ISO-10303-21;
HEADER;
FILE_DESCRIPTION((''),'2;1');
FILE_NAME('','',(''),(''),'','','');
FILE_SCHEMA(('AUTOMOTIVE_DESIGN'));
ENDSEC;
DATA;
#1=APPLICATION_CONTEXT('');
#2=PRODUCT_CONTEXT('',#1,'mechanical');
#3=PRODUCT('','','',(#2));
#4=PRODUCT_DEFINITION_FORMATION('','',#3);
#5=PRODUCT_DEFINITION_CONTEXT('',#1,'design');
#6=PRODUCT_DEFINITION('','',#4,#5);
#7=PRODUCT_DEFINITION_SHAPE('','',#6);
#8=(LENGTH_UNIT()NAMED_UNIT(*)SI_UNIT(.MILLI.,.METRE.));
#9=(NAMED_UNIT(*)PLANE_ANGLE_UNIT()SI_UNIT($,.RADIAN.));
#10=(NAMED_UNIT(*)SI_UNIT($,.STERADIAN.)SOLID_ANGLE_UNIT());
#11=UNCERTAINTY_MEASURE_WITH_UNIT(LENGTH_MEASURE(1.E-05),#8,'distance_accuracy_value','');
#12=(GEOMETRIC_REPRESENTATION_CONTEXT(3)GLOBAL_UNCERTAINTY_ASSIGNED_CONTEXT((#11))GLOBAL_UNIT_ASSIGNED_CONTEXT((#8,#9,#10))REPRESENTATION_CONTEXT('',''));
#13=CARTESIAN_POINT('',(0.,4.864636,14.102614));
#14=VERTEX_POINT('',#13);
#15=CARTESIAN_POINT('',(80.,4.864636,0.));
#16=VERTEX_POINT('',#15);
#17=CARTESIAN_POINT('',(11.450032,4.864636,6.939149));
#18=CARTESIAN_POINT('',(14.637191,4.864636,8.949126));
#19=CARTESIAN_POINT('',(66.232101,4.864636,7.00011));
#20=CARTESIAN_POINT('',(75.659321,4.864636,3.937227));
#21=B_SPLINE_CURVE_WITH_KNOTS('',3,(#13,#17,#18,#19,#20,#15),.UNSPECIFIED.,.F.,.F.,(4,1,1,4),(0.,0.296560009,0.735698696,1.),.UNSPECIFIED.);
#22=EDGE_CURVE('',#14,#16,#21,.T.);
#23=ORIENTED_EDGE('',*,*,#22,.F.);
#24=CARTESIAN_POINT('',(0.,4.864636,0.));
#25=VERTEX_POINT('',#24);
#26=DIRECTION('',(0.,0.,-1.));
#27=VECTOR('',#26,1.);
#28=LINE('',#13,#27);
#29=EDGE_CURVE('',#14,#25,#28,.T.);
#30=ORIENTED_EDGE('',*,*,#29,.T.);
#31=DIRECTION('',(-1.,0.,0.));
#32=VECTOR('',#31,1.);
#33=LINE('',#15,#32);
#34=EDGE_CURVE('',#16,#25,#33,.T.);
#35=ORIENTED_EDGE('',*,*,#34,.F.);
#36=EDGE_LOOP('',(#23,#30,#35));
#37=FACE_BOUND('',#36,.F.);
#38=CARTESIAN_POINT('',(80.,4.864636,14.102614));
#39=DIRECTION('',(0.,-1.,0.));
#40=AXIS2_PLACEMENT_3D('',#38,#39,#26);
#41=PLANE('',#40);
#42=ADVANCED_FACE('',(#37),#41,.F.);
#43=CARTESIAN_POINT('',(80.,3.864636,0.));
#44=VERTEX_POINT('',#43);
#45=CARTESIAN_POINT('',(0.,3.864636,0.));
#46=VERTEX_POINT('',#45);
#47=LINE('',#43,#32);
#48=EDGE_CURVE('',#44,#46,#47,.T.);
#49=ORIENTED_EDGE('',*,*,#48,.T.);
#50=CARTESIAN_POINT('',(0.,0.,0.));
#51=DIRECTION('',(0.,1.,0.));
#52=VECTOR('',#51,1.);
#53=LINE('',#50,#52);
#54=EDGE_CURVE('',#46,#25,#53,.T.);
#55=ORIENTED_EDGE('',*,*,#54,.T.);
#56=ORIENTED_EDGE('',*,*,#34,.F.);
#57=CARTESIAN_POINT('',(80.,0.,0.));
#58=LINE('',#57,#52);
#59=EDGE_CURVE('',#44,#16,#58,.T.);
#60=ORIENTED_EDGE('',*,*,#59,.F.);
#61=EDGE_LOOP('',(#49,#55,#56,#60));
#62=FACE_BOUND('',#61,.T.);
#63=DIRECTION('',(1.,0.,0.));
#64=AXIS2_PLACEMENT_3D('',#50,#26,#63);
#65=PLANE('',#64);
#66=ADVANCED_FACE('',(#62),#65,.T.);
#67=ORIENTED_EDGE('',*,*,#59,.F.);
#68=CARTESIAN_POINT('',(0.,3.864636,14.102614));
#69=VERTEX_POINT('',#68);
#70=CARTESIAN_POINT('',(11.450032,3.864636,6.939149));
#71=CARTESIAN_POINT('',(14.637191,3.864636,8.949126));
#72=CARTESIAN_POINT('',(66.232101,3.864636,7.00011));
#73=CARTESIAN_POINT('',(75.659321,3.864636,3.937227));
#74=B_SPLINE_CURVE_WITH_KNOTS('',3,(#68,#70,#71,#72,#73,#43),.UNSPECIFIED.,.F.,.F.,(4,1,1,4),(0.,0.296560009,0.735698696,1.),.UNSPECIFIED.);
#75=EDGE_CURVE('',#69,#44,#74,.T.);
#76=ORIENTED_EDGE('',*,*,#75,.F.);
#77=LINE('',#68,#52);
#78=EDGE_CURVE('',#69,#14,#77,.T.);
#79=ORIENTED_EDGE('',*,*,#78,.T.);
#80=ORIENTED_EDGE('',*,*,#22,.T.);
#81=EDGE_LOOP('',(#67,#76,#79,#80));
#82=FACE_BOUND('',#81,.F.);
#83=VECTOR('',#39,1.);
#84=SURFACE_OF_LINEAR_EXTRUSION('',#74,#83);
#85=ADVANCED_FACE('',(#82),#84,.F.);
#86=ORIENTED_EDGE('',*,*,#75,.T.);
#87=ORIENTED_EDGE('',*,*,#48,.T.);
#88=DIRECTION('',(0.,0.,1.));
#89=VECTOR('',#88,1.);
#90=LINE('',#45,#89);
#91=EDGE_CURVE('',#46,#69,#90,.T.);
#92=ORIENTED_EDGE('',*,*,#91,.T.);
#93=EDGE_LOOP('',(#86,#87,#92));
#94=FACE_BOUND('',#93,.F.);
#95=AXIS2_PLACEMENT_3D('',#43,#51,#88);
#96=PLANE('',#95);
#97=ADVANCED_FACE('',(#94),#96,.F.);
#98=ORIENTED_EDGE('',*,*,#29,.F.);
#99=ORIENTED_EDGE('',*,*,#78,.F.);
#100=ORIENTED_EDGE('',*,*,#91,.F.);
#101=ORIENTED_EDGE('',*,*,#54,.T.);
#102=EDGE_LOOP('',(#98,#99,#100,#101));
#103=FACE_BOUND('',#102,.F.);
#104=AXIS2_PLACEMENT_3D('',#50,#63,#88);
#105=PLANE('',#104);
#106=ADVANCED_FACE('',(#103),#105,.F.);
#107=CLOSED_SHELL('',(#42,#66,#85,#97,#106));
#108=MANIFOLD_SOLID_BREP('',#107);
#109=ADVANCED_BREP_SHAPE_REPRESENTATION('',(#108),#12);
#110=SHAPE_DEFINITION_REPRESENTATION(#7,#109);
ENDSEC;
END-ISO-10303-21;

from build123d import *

# Parameters (mm, degrees)
F0_W     = 80
F0_H     = 15
F1_DEPTH = 10
F3_DEPTH = 80
F5_DEPTH = 1


# Not quite as in the source:
# - a feature names something its author has since deleted; it is built from what else it names


with BuildPart() as f1:
    # F0 (on Front) → F1 (new body)
    with BuildSketch(Plane.XZ):
        with Locations((40, 7.5)):
            Rectangle(F0_W, F0_H)
    extrude(amount=-F1_DEPTH)

    # F2 (on face) → F3 (cut, through all)
    with BuildSketch(Plane.YZ.offset(80)):
        Polygon((0, 0), (3.8646364119, 0), (3.8646364119, 14.1026135534), (4.8646364119, 14.1026135534), (4.8646364119, 0), (10, 0), (10, 15), (0, 15), align=None)
    extrude(amount=-F3_DEPTH, mode=Mode.SUBTRACT)

    # F4 (on face) → F5 (cut, through all)
    with BuildSketch(Plane.XZ.offset(-3.8646364119)):
        with BuildLine():
            Line((80, 14.1026135534), (0, 14.1026135534))
            add(Edge.make_bspline(
                [(0, 14.1026135534), (11.4500320441, 6.9391493751), (14.6371912, 8.9491259409), (66.2321012405, 7.0001102922), (75.6593212739, 3.937227071), (80, 0)],
                knots=[0, 0, 0, 0, 0.2965600092, 0.7356986957, 1, 1, 1, 1], degree=3))
            Line((80, 0), (80, 14.1026135534))
        make_face()
    extrude(amount=-F5_DEPTH, mode=Mode.SUBTRACT)


solid = f1.part
